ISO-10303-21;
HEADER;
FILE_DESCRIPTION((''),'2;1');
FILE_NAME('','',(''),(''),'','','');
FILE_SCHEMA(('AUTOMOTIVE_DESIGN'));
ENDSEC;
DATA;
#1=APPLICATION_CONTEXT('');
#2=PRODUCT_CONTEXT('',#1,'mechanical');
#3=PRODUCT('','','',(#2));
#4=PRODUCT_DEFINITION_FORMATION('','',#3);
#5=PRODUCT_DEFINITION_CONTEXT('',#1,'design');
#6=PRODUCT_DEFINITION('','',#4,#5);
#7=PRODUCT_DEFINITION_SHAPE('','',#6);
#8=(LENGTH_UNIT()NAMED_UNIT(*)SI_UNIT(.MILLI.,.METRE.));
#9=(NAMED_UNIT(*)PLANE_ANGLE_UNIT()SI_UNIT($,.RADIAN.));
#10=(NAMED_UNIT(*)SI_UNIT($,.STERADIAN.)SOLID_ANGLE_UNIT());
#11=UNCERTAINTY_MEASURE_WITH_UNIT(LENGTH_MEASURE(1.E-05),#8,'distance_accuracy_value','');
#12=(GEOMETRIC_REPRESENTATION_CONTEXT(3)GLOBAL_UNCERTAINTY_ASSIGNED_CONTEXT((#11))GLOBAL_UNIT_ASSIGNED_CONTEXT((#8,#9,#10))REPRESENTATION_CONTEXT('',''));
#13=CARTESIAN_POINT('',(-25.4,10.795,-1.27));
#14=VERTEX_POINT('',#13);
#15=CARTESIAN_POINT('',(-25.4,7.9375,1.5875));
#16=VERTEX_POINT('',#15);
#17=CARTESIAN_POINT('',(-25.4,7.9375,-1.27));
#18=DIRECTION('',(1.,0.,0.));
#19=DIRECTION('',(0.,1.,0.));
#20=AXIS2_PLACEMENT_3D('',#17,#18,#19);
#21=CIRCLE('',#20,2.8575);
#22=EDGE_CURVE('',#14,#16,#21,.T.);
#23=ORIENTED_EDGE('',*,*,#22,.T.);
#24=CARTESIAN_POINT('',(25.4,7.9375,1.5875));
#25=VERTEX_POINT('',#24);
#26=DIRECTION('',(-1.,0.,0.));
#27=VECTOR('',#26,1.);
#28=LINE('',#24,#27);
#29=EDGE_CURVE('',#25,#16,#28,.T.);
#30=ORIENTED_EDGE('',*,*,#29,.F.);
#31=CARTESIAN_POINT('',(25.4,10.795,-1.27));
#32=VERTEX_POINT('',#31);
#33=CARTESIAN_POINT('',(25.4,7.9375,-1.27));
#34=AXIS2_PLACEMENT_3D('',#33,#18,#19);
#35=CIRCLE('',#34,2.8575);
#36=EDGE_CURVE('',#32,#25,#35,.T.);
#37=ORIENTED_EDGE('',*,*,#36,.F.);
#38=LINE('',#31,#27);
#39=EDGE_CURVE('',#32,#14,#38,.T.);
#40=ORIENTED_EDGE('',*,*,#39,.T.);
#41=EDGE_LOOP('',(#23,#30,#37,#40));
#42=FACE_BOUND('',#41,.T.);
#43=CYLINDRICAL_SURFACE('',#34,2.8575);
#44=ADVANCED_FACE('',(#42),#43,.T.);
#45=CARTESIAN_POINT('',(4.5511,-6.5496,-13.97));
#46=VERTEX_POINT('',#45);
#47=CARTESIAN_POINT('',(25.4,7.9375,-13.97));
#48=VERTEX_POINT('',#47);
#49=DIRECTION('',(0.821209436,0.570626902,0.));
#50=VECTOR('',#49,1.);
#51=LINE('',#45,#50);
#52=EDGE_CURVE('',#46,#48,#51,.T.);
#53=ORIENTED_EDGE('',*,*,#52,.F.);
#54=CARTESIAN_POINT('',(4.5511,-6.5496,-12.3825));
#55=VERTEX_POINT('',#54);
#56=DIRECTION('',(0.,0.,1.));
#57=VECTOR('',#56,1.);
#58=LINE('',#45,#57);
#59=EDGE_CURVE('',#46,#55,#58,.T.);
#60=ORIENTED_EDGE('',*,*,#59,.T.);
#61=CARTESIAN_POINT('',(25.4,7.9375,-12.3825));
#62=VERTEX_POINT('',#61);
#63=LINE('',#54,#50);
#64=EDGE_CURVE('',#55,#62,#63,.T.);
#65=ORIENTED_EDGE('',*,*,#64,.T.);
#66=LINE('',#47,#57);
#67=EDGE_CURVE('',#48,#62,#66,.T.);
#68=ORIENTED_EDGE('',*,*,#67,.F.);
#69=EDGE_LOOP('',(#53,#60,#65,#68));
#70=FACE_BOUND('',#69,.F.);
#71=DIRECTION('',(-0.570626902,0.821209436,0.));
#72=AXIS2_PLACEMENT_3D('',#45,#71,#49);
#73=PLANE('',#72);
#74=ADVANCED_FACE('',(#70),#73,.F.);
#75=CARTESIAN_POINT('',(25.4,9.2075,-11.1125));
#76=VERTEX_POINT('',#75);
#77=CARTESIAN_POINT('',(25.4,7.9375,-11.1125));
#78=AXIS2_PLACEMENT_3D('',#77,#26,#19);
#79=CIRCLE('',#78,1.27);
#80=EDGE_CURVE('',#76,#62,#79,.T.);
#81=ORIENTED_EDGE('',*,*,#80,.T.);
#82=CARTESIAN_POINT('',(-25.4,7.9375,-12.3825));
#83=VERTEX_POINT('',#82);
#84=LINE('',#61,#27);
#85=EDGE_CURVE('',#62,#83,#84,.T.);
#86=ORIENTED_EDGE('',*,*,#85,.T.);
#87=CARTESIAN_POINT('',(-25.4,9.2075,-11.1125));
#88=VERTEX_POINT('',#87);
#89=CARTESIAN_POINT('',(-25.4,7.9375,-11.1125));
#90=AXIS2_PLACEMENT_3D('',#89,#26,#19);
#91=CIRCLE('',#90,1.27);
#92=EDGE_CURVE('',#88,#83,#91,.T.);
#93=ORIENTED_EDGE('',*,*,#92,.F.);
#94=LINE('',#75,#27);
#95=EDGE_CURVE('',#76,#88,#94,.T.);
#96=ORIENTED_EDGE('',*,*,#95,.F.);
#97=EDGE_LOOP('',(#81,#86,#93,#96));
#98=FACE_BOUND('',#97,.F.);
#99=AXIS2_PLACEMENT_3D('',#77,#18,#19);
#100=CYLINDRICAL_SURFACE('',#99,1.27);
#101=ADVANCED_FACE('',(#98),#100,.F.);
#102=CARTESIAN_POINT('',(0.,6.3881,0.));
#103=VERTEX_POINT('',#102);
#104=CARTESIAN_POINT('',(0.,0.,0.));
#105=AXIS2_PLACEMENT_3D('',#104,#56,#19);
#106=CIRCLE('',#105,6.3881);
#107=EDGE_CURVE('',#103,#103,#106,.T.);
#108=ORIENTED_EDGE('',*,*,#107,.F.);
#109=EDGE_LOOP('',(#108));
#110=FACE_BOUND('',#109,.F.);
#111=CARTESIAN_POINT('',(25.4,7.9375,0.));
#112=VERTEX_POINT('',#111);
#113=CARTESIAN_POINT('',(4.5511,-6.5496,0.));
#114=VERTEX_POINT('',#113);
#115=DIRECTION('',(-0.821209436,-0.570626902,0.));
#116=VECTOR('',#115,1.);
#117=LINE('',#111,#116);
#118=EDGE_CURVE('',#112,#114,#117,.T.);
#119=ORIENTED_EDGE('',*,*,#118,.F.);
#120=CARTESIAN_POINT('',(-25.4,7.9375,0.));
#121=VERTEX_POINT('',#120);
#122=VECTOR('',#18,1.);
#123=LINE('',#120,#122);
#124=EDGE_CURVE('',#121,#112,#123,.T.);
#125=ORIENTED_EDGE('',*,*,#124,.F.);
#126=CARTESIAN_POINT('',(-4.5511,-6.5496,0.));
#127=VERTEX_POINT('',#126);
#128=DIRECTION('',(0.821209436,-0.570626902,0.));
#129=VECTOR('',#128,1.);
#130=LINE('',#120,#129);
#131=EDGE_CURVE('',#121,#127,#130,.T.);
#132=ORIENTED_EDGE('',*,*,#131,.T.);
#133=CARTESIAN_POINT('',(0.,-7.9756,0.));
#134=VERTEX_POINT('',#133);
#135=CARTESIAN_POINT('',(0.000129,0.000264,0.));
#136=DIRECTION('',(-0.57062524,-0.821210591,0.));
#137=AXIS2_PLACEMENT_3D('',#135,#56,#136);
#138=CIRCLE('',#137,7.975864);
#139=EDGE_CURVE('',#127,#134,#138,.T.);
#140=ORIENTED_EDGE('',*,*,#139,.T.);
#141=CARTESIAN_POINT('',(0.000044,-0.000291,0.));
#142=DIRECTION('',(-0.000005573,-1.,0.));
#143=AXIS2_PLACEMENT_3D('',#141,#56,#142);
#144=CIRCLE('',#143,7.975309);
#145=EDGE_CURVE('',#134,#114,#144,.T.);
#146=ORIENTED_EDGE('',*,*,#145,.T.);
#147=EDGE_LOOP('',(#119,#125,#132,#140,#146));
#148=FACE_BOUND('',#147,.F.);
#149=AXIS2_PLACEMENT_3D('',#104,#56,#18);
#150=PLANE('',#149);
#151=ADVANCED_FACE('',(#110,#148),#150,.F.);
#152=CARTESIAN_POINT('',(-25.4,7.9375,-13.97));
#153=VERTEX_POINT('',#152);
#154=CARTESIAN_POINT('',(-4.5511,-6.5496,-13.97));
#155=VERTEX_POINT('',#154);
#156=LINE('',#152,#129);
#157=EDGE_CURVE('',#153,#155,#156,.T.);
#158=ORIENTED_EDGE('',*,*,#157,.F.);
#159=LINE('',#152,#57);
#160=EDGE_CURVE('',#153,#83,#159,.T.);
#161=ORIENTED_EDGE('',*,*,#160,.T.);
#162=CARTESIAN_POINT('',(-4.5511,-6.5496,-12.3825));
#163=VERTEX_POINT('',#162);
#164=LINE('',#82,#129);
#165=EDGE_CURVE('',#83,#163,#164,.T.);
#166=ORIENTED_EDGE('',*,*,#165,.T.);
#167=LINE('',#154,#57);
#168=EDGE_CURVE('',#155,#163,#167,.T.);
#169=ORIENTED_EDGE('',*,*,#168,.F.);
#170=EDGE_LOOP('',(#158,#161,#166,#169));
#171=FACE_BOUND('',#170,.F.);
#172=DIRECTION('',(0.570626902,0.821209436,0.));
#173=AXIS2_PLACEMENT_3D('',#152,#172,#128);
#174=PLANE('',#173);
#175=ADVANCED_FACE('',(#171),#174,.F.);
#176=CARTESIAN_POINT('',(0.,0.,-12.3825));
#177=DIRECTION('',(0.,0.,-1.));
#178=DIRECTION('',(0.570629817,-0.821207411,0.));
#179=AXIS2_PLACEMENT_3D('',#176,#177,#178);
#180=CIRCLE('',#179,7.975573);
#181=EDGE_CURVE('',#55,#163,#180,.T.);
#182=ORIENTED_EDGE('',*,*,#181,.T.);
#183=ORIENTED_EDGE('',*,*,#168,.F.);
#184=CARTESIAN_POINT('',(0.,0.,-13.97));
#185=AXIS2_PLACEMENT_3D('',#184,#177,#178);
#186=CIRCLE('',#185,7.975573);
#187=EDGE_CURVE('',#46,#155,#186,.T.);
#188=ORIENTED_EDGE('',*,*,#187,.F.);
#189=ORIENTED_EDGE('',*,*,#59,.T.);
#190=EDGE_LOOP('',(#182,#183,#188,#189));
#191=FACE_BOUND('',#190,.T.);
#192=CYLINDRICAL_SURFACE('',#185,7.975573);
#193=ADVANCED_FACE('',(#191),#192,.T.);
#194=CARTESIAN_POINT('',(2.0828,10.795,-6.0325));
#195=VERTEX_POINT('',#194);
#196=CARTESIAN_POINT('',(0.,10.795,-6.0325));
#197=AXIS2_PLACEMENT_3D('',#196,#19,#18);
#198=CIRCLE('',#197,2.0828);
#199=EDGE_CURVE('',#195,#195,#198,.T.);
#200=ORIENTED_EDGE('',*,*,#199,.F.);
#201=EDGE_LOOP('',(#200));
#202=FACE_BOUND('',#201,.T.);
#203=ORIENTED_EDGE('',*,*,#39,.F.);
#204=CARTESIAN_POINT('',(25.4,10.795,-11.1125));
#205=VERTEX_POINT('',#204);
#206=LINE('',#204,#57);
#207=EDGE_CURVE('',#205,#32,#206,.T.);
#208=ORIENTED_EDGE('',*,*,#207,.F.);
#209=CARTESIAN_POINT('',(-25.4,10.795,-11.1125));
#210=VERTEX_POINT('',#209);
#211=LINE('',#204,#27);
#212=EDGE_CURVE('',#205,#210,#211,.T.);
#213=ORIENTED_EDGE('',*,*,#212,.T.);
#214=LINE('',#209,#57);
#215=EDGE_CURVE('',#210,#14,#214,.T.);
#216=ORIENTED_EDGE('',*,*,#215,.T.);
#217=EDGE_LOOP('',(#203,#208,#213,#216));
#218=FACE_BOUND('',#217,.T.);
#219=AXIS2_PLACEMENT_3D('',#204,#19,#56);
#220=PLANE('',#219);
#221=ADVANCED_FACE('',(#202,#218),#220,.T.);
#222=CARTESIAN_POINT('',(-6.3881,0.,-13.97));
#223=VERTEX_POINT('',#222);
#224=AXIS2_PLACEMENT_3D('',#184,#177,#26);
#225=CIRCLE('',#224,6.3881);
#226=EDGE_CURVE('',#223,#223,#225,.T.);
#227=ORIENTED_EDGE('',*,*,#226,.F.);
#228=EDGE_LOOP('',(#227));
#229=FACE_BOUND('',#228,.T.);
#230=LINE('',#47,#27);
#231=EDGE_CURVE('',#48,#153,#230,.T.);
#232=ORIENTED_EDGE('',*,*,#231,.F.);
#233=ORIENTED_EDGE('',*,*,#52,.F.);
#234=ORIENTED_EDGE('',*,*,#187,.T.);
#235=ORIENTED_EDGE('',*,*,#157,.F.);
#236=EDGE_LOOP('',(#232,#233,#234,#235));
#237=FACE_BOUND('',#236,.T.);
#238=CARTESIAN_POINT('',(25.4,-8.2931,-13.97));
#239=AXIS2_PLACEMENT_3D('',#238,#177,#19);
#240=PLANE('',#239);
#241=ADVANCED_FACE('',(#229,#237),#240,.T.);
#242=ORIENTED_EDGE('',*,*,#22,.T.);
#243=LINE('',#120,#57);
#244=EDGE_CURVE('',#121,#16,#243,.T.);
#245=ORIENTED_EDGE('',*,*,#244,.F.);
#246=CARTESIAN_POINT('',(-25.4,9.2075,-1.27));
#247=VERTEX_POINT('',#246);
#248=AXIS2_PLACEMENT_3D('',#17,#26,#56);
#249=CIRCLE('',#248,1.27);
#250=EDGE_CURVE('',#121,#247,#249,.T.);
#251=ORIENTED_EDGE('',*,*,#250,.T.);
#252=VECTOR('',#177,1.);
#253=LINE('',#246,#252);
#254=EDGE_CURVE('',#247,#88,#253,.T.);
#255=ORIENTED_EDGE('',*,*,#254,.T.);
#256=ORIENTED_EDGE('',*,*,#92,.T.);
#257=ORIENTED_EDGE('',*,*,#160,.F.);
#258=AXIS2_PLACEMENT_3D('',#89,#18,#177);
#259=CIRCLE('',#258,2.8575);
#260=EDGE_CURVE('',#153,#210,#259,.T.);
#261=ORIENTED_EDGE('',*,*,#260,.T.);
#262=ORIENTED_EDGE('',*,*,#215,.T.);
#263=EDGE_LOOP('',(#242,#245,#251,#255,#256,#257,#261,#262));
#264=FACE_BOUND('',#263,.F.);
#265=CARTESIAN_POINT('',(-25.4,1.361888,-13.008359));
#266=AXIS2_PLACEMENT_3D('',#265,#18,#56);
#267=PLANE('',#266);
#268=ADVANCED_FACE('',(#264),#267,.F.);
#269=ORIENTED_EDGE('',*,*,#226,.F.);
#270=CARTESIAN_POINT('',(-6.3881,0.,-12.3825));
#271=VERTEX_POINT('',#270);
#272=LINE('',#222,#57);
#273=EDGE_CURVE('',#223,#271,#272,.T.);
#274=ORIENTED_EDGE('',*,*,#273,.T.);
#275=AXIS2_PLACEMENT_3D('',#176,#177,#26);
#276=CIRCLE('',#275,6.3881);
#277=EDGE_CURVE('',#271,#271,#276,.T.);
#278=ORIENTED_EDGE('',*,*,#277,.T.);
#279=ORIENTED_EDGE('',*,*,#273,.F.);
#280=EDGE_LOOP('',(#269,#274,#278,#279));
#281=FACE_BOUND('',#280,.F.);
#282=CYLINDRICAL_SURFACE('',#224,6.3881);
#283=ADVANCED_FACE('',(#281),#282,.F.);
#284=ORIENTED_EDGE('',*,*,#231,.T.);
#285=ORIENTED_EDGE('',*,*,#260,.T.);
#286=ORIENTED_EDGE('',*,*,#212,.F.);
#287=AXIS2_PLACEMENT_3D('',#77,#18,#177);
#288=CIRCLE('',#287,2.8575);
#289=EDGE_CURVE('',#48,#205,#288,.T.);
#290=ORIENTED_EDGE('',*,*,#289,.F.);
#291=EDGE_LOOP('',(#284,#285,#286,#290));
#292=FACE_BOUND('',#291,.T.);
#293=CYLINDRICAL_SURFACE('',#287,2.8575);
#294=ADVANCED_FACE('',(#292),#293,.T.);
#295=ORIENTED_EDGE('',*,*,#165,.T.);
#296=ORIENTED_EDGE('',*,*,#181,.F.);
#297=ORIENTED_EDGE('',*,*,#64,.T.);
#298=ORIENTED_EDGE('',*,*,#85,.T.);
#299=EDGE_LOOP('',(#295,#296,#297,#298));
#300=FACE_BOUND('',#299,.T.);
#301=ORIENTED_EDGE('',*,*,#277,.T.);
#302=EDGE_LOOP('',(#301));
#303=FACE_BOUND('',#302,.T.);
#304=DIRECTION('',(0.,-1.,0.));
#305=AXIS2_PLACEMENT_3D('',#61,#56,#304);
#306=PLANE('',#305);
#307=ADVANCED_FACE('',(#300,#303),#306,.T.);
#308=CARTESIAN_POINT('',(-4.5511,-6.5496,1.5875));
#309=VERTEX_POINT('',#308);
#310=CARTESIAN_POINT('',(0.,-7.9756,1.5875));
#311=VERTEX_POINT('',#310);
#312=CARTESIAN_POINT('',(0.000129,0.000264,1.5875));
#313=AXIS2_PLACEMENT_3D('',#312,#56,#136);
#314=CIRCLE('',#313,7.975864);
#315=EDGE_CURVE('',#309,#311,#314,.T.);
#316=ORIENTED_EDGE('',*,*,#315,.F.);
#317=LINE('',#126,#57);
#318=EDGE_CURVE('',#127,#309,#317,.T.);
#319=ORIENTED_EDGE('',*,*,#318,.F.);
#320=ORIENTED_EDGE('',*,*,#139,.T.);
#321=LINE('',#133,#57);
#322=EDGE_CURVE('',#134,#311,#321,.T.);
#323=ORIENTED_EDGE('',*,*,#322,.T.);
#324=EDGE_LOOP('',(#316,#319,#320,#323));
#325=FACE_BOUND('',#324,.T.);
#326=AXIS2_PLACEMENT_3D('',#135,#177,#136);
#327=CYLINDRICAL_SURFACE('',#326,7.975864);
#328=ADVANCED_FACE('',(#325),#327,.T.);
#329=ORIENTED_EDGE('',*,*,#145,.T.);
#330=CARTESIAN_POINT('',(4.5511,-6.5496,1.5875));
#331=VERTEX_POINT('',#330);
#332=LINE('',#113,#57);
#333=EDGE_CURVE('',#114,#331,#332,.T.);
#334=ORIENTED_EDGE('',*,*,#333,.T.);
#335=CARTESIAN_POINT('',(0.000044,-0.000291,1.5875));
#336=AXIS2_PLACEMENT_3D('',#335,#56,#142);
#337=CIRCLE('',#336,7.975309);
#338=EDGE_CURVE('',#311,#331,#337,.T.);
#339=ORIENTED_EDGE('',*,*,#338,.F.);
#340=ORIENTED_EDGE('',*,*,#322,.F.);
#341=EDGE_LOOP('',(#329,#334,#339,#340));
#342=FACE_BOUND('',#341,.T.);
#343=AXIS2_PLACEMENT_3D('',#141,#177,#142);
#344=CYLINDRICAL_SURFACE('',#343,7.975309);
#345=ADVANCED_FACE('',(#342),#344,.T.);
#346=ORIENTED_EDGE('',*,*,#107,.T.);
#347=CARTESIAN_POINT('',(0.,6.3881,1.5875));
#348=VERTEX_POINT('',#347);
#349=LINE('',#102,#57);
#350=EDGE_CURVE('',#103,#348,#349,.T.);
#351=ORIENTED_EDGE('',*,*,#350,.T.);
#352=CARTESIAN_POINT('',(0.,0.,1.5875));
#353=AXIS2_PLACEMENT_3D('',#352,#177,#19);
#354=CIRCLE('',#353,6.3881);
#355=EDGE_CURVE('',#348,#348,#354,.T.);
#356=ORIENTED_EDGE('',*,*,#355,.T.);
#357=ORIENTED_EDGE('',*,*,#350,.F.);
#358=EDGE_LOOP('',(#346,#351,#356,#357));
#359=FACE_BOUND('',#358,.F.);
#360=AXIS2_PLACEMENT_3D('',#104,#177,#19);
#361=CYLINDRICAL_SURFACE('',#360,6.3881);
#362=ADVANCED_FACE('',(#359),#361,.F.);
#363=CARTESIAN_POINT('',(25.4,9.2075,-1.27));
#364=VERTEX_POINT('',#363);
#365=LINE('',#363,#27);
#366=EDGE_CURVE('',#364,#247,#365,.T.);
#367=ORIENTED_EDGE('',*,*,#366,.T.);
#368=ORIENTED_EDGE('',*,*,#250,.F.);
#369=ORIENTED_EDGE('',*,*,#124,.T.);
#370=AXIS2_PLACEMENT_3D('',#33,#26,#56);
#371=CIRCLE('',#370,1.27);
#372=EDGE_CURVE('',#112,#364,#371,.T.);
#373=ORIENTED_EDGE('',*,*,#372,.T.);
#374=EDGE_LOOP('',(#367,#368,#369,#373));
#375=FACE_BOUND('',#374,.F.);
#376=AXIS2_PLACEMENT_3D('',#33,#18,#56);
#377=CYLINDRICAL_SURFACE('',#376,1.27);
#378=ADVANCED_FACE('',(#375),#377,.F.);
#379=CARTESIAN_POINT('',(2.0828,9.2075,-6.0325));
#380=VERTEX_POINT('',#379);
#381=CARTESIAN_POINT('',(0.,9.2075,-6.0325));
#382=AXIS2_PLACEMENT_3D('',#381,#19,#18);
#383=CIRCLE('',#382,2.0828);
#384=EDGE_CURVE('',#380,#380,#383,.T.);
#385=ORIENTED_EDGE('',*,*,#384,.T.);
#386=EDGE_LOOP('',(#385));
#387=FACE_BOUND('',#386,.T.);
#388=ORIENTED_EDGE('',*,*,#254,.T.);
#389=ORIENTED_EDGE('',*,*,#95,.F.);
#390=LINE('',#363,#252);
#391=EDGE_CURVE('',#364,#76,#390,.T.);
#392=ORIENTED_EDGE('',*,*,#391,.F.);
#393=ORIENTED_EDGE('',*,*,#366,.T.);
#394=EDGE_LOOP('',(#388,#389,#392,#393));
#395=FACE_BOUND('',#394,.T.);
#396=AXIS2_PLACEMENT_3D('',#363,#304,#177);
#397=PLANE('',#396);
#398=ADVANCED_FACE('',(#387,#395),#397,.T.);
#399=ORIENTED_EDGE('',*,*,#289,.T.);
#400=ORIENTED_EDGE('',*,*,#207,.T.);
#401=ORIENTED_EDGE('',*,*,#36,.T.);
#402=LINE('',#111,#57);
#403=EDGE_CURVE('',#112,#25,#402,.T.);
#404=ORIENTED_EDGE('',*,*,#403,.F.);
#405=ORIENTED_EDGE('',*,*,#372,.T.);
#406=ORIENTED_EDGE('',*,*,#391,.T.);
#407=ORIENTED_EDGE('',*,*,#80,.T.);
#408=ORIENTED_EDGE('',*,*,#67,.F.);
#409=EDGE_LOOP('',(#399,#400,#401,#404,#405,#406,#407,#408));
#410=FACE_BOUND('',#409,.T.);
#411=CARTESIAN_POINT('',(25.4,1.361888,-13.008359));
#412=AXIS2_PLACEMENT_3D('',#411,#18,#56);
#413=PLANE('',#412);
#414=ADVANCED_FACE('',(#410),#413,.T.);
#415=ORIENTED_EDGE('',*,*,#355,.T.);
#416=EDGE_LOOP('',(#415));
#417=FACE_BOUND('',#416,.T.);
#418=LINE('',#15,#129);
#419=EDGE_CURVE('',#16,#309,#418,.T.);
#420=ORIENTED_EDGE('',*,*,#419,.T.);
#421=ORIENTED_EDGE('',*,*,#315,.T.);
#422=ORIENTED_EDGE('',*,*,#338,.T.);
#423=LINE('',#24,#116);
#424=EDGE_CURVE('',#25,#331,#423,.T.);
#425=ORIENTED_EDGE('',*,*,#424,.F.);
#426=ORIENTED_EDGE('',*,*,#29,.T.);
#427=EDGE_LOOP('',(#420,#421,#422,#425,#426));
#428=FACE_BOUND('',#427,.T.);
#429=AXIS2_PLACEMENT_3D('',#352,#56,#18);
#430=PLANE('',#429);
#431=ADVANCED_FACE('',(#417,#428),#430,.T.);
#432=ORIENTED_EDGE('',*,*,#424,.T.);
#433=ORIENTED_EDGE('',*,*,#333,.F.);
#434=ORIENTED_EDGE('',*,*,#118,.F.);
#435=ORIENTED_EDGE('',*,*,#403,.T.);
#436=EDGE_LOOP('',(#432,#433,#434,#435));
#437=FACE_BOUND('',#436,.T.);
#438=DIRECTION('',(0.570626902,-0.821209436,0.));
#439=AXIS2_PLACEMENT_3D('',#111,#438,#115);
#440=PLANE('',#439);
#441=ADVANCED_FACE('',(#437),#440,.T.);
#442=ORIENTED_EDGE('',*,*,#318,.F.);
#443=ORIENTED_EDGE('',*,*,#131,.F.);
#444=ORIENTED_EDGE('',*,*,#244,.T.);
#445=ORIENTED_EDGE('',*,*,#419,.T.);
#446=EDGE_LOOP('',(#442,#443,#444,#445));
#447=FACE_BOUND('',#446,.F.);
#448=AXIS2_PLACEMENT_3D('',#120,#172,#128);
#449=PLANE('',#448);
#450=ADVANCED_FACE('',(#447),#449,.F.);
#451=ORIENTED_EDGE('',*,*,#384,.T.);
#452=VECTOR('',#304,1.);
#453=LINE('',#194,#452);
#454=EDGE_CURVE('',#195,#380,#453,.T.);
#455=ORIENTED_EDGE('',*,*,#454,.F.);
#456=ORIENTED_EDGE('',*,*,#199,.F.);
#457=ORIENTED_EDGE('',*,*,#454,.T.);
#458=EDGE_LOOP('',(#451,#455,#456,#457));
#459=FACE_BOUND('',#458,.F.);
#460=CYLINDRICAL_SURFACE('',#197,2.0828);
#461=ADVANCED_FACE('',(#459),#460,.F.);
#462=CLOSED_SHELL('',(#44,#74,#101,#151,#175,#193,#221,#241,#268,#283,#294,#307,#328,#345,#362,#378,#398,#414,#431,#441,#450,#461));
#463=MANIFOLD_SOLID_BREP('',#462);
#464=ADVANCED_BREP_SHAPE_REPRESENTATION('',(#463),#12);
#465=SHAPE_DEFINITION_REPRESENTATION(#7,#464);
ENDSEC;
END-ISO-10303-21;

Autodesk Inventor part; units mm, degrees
ref_plane "YZ Plane" through (0, 0, 0) normal (1, 0, 0) x (0, 1, 0)
ref_plane "XZ Plane" through (0, 0, 0) normal (0, 1, 0) x (-1, 0, 0)
ref_plane "XY Plane" through (0, 0, 0) normal (0, 0, 1) x (1, 0, 0)
sketch "Sketch1" plane through (0, 0, 0) normal (0, 0, 1) x (1, 0, 0)
  arc A0 (0, 6.3881) -> (0, -6.3881) centre (0, 0) ccw
  line L0 (-25.4, 7.9375) -> (-4.5511, -6.5496)
  line L1 (0, 7.9375) -> (0, -13.1033) construction
  line L2 (-25.4, 7.9375) -> (0, 7.9375)
  arc A1 (-4.5511, -6.5496) -> (0, -7.9756) centre (0, 0) ccw
  arc A2 (0, -6.3881) -> (0, 6.3881) centre (0, 0) ccw
  line L3 (25.4, 7.9375) -> (4.5511, -6.5496)
  line L4 (25.4, 7.9375) -> (0, 7.9375)
  arc A3 (0, -7.9756) -> (4.5511, -6.5496) centre (0, 0) ccw
  dimension "d0" = 12.7762
  dimension "d1" = 7.9375
  dimension "d2" = 25.4
  dimension "d3" = 1.5875
extrude "Plate1" add sketch "Sketch1" along normal blind 1.5875
sketch "Sketch2" plane through (25.4, 9.2075, -1.27) normal (0, 1, 0) x (-1, 0, 0)
  line L0 (50.8, 0) -> (0, 0)
  line L1 (0, 0) -> (0, -9.8425)
  line L2 (0, -9.8425) -> (50.8, -9.8425)
  line L3 (50.8, -9.8425) -> (50.8, 0)
edge flange "Flange1" height 12.7 angle 90 thickness 1.5875 bend radius 1.27 thickness toward (0, 1, 0) relief tear relief width 1.5875 relief depth 0.7937 edges at (-12.7, 7.9375, 0) wall of the first edge with corners at (-25.4, 9.2075, -1.27) (25.4, 9.2075, -1.27) (25.4, 9.2075, -11.1125) (-25.4, 9.2075, -11.1125)
bend "Bend1"
corner "Corner1"
sketch "Sketch3" plane through (-25.4, 10.795, -11.1125) normal (0, 1, 0) x (1, 0, 0)
  line L0 (0, -9.8425) -> (50.8, -9.8425) projected
  line L1 (50.8, 0) -> (50.8, -9.8425) projected
  line L2 (25.4, -6.2418) -> (25.4, -0.3175) construction
  circle A0 centre (25.4, -5.08) radius 2.0828
  dimension "d35" = 4.1656
  dimension "d36" = 4.7625
  dimension "d37" = 25.4
extrude "Cut1" cut sketch "Sketch3" against normal blind 1.5875
sketch "Sketch4" plane through (25.4, 7.9375, -12.3825) normal (0, 0, -1) x (-1, 0, 0)
  line L0 (50.8, 0) -> (0, 0)
  line L1 (0, 0) -> (0, -16.2306)
  line L2 (0, -16.2306) -> (50.8, -16.2306)
  line L3 (50.8, -16.2306) -> (50.8, 0)
edge flange "Flange2" height 19.0881 angle 90 thickness 1.5875 bend radius 1.27 thickness toward (0, 0, -1) relief tear relief width 1.5875 relief depth 0.7937 edges at (0, 9.2075, -11.1125) wall of the first edge with corners at (-25.4, 7.9375, -12.3825) (25.4, 7.9375, -12.3825) (25.4, -8.2931, -12.3825) (-25.4, -8.2931, -12.3825)
bend "Bend2"
corner "Corner2"
sketch "Sketch5" plane through (25.4, -8.2931, -13.97) normal (0, 0, -1) x (-1, 0, 0)
  line L0 (50.8, 16.2306) -> (0, 16.2306) projected
  line L1 (0, 0) -> (0, 16.2306) projected
  line L2 (50.8, 0) -> (0, 0) projected
  line L3 (50.8, 16.2306) -> (50.8, 0) projected
  circle A0 centre (25.4, 8.2931) radius 6.3881 projected
  line L4 (50.8, 16.2306) -> (29.9511, 1.7435) projected
  line L5 (0, 16.2306) -> (50.8, 16.2306) projected
  line L6 (20.8489, 1.7435) -> (0, 16.2306) projected
  arc A1 (20.8489, 1.7435) -> (29.9511, 1.7435) centre (25.4, 8.2931) ccw projected
extrude "Cut2" cut sketch "Sketch5" against normal blind 1.5875 contours L3 L2 L1 L6 A1 L4 | A0
equation "\"d37\" = d2"
equation "\"d18\" = Thickness"
equation "\"d49\" = Thickness"
equation "\"d5\" = BendReliefWidth"
equation "\"d6\" = BendReliefDepth"
equation "\"d7\" = MinimumRemnant"
equation "\"d8\" = BendRadius"
equation "\"d12\" = CornerReliefSize"
equation "\"d13\" = GapSize"
equation "\"d14\" = JacobiRadiusSize"
equation "\"d39\" = BendReliefWidth"
equation "\"d40\" = BendReliefDepth"
equation "\"d41\" = MinimumRemnant"
equation "\"d42\" = BendRadius"
equation "\"d46\" = CornerReliefSize"
equation "\"d47\" = GapSize"
equation "\"d48\" = JacobiRadiusSize"
equation "\"BendRadius\" = Thickness"
equation "\"BendReliefWidth\" = Thickness"
equation "\"BendReliefDepth\" = 0.5 * Thickness"
equation "\"CornerReliefSize\" = 4 * Thickness"
equation "\"MinimumRemnant\" = 2 * Thickness"
equation "\"TransitionRadius\" = BendRadius"
equation "\"JacobiRadiusSize\" = BendRadius"
equation "\"GapSize\" = Thickness"
equation "\"d4\" = BendRadius"
equation "\"Thickness\" = 1.5875"
properties part number "Pipe to Gas Spring Connector (9417K91)" material "Aluminum"
